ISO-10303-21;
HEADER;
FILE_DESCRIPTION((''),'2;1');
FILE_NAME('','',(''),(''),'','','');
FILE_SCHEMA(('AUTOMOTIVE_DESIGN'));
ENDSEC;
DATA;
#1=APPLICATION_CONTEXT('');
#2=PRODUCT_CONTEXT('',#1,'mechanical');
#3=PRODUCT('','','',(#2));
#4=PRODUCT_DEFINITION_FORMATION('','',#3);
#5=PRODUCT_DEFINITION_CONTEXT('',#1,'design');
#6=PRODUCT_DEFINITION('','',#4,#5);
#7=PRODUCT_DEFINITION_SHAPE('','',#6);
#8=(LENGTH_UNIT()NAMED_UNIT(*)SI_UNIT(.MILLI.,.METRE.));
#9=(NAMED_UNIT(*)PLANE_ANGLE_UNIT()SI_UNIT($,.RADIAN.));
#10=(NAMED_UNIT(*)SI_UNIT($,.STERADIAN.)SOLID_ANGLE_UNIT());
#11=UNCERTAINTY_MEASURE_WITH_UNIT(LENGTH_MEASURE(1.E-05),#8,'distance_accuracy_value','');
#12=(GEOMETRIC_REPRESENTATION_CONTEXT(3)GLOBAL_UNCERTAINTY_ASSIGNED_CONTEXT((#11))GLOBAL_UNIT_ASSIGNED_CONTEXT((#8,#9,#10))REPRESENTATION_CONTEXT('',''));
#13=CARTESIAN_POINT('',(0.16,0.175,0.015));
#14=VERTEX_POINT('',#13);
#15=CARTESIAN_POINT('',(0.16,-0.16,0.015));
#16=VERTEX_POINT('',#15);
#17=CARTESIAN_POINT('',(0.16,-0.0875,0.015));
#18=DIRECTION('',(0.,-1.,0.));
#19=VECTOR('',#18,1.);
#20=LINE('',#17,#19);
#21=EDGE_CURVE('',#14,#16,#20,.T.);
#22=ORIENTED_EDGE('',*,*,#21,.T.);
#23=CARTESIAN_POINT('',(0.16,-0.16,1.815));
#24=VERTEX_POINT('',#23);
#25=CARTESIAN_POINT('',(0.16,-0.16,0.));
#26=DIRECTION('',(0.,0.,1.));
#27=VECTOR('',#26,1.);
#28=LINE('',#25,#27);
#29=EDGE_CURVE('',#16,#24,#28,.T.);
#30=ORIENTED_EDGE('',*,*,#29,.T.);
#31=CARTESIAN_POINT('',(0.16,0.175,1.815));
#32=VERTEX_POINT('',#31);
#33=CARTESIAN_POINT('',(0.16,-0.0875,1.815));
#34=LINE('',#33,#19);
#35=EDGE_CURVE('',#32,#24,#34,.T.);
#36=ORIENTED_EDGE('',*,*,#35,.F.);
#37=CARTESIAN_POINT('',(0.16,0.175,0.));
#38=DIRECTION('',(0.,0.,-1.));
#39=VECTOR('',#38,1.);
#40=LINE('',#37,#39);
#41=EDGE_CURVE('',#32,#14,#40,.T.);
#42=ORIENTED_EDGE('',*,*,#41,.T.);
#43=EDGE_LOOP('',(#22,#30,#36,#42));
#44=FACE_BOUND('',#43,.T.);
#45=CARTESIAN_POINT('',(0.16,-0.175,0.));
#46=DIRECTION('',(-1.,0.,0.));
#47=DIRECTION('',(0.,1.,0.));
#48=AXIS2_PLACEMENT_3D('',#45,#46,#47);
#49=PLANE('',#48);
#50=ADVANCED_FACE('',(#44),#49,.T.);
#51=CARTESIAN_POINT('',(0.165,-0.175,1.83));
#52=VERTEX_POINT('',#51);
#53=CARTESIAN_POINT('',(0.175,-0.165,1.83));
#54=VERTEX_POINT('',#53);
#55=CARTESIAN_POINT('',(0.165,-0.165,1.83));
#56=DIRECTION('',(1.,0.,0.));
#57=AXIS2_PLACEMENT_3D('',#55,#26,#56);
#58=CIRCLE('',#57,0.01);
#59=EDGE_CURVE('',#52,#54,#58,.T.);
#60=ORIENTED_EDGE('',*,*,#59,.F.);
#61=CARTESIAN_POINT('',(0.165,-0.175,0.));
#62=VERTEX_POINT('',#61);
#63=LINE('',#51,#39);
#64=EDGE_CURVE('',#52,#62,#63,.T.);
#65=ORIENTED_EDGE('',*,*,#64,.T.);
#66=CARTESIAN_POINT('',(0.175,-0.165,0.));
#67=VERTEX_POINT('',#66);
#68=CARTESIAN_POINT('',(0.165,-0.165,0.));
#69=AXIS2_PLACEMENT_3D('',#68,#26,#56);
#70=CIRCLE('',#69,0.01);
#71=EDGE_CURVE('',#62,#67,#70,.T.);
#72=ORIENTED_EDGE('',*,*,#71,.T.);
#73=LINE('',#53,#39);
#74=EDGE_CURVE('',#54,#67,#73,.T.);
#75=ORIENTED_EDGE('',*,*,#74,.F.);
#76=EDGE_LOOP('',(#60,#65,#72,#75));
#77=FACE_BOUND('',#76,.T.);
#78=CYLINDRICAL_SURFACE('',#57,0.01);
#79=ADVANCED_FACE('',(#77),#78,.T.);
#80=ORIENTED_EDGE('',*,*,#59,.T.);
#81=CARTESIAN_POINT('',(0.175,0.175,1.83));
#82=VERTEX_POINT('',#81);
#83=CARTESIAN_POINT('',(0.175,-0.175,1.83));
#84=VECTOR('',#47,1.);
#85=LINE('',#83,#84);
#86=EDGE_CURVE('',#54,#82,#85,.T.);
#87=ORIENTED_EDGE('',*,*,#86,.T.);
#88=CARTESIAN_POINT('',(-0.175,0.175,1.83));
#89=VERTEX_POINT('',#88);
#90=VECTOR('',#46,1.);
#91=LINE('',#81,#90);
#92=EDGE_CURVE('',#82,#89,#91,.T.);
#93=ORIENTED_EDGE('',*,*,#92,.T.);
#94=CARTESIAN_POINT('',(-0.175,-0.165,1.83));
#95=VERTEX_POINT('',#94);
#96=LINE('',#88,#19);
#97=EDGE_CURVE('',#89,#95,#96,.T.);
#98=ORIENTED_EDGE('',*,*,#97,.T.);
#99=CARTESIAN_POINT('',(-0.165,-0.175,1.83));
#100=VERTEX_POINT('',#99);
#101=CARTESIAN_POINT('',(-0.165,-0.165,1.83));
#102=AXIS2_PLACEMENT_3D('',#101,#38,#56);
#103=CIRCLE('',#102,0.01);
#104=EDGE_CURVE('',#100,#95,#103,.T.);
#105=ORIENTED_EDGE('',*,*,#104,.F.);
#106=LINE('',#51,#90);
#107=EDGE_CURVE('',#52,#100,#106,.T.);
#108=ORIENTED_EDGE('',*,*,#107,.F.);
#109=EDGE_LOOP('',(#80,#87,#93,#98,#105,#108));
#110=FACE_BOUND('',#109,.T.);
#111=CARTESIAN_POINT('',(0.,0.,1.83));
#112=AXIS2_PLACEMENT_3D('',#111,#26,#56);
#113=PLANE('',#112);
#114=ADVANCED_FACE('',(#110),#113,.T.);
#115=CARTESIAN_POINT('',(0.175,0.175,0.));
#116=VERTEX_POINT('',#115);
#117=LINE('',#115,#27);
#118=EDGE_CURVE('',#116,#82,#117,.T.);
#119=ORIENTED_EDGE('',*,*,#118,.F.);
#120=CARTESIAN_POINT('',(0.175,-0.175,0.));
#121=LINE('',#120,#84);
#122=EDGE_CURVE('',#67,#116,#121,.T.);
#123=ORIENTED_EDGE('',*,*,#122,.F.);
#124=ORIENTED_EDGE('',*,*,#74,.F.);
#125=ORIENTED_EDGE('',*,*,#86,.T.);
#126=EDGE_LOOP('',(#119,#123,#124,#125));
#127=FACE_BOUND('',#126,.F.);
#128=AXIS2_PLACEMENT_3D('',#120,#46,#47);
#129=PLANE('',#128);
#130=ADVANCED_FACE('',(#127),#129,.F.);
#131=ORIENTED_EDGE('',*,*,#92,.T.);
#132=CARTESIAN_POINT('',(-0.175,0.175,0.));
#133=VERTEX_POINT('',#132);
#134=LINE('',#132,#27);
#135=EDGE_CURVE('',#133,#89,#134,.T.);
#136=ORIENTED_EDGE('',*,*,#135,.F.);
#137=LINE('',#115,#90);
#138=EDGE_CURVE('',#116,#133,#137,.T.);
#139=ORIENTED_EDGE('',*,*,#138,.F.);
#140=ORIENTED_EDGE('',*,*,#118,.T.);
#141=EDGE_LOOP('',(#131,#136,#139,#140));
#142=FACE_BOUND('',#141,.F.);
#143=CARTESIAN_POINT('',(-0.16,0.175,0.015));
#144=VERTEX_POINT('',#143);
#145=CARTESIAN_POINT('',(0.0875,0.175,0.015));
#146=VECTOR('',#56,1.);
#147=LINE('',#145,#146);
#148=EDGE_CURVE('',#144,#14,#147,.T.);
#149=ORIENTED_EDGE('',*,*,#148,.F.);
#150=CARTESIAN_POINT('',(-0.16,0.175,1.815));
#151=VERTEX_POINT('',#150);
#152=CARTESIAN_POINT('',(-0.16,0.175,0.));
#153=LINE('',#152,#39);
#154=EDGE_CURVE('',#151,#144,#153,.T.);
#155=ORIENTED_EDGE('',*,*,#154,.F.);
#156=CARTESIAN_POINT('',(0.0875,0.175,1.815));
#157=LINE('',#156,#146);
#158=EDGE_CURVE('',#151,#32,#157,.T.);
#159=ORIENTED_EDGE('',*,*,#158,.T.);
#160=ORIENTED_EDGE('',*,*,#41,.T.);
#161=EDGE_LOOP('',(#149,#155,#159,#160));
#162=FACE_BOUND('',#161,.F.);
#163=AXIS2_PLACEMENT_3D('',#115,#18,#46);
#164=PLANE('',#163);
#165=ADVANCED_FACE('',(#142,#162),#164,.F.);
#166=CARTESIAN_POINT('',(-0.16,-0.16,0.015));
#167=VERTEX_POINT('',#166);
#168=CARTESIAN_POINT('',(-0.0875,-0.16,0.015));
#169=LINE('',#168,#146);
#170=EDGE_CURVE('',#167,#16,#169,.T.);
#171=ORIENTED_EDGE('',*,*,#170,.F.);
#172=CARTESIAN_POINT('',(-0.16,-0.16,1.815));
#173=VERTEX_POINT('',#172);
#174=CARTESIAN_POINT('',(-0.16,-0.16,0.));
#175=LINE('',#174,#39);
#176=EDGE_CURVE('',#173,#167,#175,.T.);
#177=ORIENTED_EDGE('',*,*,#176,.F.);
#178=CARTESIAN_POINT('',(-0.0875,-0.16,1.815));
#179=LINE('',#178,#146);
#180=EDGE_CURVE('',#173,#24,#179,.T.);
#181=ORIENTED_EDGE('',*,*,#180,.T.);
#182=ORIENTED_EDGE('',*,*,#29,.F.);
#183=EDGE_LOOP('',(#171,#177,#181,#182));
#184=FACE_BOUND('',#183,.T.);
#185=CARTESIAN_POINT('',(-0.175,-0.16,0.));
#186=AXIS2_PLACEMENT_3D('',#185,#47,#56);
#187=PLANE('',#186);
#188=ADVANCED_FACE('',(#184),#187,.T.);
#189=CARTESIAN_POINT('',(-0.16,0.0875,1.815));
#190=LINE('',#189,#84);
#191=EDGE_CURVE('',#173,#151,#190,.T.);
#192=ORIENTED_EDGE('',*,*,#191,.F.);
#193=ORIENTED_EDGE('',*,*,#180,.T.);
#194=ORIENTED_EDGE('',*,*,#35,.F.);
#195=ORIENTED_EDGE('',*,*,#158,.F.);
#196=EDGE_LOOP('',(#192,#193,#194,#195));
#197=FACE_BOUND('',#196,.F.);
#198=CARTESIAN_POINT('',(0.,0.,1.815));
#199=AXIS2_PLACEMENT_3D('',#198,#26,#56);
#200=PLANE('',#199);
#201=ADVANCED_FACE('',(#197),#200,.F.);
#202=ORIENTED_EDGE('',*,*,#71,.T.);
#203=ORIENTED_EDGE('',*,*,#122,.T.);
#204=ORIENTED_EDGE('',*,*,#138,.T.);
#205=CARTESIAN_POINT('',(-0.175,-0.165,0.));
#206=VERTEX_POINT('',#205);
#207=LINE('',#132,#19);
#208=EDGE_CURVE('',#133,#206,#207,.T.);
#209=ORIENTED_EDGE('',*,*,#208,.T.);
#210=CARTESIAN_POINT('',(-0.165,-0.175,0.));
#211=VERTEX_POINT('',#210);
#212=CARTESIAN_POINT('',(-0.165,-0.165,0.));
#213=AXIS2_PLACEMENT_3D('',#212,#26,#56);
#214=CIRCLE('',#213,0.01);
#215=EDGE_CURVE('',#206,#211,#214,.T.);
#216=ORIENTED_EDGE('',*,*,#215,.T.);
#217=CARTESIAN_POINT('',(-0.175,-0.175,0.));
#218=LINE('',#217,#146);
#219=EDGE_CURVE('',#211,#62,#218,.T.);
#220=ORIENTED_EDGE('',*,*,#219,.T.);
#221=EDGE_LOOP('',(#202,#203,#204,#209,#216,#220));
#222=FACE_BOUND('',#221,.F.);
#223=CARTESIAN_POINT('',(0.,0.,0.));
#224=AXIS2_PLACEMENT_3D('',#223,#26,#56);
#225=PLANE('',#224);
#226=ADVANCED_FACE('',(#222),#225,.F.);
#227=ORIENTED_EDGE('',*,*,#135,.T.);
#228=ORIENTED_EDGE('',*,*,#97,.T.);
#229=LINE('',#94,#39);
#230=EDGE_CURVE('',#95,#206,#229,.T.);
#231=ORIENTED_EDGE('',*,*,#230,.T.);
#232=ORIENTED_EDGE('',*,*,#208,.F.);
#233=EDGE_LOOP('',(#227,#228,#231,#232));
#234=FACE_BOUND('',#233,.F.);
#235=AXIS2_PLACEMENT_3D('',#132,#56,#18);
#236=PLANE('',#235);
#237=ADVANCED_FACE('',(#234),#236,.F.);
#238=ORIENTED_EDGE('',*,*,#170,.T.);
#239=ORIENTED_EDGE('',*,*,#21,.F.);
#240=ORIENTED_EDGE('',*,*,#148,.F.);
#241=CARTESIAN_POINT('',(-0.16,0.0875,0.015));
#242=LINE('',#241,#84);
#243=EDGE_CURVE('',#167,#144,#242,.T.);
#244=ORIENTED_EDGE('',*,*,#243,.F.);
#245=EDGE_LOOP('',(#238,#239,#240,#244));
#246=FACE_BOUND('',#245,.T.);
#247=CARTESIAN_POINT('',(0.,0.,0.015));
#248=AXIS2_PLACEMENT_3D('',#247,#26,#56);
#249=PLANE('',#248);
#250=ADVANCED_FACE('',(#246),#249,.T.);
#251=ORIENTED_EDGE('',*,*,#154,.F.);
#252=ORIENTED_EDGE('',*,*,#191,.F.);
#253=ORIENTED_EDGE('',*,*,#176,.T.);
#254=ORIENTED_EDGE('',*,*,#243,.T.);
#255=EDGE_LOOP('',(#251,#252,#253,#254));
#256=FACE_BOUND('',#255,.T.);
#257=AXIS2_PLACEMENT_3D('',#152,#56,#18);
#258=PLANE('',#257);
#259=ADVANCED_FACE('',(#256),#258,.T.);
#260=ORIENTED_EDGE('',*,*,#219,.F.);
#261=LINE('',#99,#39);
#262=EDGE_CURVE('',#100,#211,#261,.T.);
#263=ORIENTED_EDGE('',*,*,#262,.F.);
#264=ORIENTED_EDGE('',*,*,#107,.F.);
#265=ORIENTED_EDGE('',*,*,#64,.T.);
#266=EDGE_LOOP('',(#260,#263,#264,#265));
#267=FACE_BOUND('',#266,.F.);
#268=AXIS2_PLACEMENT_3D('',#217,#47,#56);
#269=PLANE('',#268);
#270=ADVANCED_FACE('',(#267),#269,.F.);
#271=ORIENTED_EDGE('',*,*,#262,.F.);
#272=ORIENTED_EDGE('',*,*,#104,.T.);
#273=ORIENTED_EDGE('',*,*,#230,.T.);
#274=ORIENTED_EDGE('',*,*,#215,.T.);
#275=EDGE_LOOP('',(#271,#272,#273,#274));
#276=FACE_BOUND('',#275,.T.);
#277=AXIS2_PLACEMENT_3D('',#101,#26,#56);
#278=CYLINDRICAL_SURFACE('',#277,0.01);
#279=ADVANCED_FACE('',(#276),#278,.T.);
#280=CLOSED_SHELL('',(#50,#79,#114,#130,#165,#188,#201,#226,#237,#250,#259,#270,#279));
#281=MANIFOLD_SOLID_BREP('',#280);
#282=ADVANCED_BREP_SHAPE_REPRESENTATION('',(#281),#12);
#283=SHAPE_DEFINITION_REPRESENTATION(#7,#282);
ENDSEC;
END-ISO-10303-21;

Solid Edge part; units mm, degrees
sketch "Sketch1" plane through (0, 0, 0) normal (0, 0, 1) x (1, 0, 0)
  line L0 (-0.175, -0.175) -> (0.175, -0.175)
  line L1 (0.175, -0.175) -> (0.175, 0.175)
  line L2 (0.175, 0.175) -> (-0.175, 0.175)
  line L3 (-0.175, 0.175) -> (-0.175, -0.175)
  dimension "D1" = 0.35
  dimension "D2" = 0.35
extrude "Protrusion1" add sketch "Sketch1" along normal blind 1.83
sketch "Sketch2" plane through (0, 0, 1.83) normal (0, 0, 1) x (1, 0, 0)
  line L0 (-0.175, -0.165) -> (-0.175, -0.2285)
  line L1 (0.175, -0.2285) -> (-0.175, -0.2285)
  line L2 (0.175, -0.165) -> (0.175, -0.2285)
  arc A0 (0.165, -0.175) -> (0.175, -0.165) centre (0.165, -0.165) ccw
  line L3 (0.165, -0.175) -> (-0.165, -0.175)
  arc A1 (-0.165, -0.175) -> (-0.175, -0.165) centre (-0.165, -0.165) cw
extrude "Cutout1" cut sketch "Sketch2" against normal through all
shell "Dünnwand_1" thickness 0.015 removed faces 1 at (0.1202, 0.175, 1.5067)
